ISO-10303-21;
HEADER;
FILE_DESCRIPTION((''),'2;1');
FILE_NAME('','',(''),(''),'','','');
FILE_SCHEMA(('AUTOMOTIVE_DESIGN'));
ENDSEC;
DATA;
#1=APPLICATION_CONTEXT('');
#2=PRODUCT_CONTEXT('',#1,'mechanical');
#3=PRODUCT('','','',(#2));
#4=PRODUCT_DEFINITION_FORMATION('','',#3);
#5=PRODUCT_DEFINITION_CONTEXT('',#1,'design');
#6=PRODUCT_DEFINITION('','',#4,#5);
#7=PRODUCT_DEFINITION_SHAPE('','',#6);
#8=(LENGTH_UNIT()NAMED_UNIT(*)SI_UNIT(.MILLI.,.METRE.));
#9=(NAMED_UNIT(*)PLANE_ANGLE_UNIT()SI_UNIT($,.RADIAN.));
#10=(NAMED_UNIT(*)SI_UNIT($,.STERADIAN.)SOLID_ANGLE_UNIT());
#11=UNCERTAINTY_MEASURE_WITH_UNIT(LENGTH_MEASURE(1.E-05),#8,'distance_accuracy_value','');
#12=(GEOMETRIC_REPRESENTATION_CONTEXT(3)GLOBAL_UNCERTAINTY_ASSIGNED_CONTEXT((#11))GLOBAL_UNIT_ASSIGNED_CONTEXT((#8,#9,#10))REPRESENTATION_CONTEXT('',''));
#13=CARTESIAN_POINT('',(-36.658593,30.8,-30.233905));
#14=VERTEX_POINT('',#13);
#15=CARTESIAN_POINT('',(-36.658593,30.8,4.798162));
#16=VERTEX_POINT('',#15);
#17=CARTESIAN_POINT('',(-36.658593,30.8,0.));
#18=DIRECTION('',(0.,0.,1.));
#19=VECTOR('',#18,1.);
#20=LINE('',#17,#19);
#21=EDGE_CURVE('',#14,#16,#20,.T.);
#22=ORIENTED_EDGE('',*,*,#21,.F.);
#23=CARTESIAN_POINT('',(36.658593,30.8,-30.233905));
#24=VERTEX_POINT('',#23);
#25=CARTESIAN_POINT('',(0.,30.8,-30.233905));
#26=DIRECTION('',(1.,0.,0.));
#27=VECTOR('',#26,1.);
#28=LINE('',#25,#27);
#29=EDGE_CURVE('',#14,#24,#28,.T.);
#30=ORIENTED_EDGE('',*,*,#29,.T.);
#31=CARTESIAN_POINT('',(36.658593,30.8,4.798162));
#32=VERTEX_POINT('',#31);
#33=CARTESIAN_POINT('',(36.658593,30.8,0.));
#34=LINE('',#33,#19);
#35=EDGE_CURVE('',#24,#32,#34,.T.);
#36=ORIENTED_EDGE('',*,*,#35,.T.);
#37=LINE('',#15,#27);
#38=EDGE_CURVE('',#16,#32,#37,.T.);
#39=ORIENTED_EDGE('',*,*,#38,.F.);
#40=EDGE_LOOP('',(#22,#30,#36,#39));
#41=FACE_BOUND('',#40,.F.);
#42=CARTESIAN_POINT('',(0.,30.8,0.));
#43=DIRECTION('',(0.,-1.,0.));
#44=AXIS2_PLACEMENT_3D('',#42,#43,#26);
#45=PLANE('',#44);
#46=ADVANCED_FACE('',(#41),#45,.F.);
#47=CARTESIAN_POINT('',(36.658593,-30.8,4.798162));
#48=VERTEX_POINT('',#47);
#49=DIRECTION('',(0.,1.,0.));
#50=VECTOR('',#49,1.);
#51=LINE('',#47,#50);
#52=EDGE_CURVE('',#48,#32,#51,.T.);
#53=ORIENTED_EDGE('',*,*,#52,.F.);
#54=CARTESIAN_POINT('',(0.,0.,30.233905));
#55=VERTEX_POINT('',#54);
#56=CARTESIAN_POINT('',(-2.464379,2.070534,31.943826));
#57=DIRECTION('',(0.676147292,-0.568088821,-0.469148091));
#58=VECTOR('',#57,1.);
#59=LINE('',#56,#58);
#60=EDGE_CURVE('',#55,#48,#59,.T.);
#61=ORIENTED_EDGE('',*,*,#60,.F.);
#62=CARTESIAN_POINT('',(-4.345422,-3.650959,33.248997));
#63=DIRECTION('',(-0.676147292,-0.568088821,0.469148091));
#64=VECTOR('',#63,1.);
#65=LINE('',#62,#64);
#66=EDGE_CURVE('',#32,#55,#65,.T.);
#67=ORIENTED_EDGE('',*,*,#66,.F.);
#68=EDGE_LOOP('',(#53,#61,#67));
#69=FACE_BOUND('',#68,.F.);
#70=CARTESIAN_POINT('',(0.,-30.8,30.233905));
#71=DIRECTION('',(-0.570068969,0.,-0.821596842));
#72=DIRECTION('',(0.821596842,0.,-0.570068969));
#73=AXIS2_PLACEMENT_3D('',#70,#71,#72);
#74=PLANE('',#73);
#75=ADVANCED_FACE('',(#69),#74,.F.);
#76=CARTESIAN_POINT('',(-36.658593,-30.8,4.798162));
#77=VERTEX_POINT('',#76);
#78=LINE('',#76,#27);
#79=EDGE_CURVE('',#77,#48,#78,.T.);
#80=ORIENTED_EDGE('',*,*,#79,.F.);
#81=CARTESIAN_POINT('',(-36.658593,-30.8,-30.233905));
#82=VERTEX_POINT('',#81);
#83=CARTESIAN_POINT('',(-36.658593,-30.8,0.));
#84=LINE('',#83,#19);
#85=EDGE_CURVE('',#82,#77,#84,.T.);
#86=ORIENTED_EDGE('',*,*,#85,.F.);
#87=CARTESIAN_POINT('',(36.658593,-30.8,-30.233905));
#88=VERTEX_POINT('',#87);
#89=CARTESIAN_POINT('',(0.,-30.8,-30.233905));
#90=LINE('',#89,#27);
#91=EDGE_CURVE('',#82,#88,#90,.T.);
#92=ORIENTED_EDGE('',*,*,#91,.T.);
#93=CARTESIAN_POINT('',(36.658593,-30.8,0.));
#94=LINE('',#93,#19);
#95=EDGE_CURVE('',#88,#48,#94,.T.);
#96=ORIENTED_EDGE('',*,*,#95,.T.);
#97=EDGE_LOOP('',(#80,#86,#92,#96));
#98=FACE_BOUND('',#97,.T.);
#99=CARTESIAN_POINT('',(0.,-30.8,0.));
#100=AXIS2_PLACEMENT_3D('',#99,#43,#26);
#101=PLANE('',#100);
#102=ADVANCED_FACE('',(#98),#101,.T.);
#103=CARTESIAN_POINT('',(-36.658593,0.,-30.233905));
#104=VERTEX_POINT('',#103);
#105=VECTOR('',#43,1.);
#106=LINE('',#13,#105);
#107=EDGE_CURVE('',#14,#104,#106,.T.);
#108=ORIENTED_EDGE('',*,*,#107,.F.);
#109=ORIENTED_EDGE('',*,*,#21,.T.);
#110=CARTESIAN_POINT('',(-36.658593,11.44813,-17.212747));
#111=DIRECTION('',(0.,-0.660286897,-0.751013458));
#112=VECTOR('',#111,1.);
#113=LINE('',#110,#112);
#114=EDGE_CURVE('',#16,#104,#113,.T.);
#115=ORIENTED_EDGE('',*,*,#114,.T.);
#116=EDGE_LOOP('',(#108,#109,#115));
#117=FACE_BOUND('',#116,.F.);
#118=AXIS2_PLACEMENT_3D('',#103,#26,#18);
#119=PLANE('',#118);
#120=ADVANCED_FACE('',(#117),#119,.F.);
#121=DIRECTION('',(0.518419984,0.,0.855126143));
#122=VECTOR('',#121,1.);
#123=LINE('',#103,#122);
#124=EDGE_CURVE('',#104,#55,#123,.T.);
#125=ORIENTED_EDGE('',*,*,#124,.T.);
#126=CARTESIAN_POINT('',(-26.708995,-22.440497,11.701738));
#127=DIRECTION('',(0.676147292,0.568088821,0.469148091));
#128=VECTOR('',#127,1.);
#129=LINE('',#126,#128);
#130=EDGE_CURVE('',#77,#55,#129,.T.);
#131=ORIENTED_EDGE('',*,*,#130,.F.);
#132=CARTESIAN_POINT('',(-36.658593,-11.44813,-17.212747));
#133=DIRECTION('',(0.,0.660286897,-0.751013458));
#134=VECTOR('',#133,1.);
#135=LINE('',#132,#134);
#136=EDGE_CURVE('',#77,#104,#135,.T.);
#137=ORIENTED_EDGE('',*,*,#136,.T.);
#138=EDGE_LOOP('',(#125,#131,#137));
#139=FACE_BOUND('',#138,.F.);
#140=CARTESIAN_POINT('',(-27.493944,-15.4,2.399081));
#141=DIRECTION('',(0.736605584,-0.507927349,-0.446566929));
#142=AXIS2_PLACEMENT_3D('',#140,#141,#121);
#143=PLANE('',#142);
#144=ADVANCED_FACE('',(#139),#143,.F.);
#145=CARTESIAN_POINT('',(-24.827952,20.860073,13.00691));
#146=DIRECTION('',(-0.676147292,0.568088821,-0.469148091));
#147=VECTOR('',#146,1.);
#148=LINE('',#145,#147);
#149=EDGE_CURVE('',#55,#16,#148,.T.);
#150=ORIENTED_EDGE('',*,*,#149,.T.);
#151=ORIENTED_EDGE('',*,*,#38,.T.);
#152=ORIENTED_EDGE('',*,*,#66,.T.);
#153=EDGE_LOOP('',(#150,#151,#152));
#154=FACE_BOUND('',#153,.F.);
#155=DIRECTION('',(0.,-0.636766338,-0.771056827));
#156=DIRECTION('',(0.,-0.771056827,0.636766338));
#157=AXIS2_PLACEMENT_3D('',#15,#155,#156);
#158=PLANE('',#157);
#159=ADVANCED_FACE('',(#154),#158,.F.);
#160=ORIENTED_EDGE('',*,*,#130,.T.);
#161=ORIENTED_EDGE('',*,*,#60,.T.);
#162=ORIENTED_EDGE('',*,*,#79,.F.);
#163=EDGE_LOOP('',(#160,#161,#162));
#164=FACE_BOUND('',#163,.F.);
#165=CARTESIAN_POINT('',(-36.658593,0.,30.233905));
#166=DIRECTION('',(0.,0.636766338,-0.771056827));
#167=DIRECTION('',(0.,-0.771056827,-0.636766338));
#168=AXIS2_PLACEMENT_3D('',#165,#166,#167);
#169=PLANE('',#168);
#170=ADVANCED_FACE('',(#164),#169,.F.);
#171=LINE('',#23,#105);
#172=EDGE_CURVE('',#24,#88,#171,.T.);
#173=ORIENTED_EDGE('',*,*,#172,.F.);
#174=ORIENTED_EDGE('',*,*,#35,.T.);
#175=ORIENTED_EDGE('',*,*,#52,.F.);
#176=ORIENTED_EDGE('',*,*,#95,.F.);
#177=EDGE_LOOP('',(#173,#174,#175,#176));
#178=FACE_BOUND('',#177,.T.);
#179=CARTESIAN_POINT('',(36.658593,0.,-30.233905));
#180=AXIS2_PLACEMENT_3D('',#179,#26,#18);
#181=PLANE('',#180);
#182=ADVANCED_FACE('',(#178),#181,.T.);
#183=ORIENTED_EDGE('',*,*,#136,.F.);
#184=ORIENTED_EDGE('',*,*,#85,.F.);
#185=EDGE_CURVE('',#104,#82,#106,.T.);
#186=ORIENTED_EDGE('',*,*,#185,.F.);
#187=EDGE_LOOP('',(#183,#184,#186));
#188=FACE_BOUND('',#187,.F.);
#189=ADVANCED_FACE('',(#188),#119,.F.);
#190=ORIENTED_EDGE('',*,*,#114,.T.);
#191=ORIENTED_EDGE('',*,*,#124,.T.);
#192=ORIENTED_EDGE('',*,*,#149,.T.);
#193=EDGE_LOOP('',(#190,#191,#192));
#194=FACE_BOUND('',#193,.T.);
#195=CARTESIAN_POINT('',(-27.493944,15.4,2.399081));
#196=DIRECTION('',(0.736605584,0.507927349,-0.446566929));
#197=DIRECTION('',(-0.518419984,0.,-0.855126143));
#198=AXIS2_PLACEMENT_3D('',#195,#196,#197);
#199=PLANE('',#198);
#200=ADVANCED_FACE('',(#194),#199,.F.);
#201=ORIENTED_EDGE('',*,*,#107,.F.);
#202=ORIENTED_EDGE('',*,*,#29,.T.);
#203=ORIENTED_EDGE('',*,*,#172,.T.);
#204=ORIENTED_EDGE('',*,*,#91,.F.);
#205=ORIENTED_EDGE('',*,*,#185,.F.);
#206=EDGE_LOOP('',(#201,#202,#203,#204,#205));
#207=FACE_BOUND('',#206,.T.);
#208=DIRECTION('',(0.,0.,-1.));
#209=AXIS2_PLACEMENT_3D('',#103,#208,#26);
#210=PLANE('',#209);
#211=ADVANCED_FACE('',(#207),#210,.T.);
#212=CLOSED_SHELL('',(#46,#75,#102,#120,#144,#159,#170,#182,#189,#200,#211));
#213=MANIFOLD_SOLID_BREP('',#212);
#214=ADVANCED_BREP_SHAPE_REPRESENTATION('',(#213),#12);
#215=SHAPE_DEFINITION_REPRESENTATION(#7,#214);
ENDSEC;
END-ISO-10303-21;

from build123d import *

# Parameters (mm, degrees)
F0_W     = 73.3171850443
F0_H     = 60.4678094387
F1_DEPTH = 30.8
F3_DEPTH = 61.601
F5_DEPTH = 73.3181850443


# Not quite as in the source:
# - a feature of the source that left no trace in its solid (it failed there, or was rolled back) is left out


with BuildPart() as f1:
    # F0 (on Front) → F1 (new body, symmetric)
    with BuildSketch(Plane.XZ):
        Rectangle(F0_W, F0_H)
    extrude(amount=F1_DEPTH, both=True)

    # F2 (on face) → F3 (cut, through all)
    with BuildSketch(Plane.XZ.offset(30.8)):
        Polygon((-36.6585925221, 30.2339047194), (-36.6585925221, 4.7981617972), (0, 30.2339047194), align=None)
        Polygon((36.6585925221, 30.2339047194), (0, 30.2339047194), (36.6585925221, 4.7981617972), align=None)
    extrude(amount=-F3_DEPTH, mode=Mode.SUBTRACT)

    # F4 (on face) → F5 (cut, through all)
    with BuildSketch(Plane(origin=(-36.6585925221, 0, 0), x_dir=(0, -1, 0), z_dir=(-1, 0, 0))):
        Polygon((0, 30.2339047194), (-30.8, 30.2339047194), (-30.8, 4.7981617972), align=None)
        Polygon((30.8, 30.2339047194), (0, 30.2339047194), (30.8, 4.7981617972), align=None)
    extrude(amount=-F5_DEPTH, mode=Mode.SUBTRACT)

    # F10: sweep along a path in F9
    with BuildLine(Plane(origin=(-9.9452522809, 6.8577617895, 6.0293064075), x_dir=(-0.4343419548, -0.8613999118, 0.2633196883), z_dir=(-0.7366055839, 0.5079273491, 0.4465669287))) as f10_path:
        Line((7.9611823679, -9.5022734797), (43.7169324882, -14.9015133699))
    # F6 (on Front) → F10 (sweep, cut)
    with BuildSketch(Plane.XZ):
        Polygon((-36.6585925221, 4.7981617972), (-36.6585925221, -30.2339047194), (0, 30.2339047194), align=None)
    sweep(path=f10_path.line, mode=Mode.SUBTRACT)

    # F11: F1 across plane


with BuildPart() as f1_1:
    add(f1.part)
    add(f1.part.mirror(Plane.XZ), mode=Mode.INTERSECT)


solid = f1_1.part
